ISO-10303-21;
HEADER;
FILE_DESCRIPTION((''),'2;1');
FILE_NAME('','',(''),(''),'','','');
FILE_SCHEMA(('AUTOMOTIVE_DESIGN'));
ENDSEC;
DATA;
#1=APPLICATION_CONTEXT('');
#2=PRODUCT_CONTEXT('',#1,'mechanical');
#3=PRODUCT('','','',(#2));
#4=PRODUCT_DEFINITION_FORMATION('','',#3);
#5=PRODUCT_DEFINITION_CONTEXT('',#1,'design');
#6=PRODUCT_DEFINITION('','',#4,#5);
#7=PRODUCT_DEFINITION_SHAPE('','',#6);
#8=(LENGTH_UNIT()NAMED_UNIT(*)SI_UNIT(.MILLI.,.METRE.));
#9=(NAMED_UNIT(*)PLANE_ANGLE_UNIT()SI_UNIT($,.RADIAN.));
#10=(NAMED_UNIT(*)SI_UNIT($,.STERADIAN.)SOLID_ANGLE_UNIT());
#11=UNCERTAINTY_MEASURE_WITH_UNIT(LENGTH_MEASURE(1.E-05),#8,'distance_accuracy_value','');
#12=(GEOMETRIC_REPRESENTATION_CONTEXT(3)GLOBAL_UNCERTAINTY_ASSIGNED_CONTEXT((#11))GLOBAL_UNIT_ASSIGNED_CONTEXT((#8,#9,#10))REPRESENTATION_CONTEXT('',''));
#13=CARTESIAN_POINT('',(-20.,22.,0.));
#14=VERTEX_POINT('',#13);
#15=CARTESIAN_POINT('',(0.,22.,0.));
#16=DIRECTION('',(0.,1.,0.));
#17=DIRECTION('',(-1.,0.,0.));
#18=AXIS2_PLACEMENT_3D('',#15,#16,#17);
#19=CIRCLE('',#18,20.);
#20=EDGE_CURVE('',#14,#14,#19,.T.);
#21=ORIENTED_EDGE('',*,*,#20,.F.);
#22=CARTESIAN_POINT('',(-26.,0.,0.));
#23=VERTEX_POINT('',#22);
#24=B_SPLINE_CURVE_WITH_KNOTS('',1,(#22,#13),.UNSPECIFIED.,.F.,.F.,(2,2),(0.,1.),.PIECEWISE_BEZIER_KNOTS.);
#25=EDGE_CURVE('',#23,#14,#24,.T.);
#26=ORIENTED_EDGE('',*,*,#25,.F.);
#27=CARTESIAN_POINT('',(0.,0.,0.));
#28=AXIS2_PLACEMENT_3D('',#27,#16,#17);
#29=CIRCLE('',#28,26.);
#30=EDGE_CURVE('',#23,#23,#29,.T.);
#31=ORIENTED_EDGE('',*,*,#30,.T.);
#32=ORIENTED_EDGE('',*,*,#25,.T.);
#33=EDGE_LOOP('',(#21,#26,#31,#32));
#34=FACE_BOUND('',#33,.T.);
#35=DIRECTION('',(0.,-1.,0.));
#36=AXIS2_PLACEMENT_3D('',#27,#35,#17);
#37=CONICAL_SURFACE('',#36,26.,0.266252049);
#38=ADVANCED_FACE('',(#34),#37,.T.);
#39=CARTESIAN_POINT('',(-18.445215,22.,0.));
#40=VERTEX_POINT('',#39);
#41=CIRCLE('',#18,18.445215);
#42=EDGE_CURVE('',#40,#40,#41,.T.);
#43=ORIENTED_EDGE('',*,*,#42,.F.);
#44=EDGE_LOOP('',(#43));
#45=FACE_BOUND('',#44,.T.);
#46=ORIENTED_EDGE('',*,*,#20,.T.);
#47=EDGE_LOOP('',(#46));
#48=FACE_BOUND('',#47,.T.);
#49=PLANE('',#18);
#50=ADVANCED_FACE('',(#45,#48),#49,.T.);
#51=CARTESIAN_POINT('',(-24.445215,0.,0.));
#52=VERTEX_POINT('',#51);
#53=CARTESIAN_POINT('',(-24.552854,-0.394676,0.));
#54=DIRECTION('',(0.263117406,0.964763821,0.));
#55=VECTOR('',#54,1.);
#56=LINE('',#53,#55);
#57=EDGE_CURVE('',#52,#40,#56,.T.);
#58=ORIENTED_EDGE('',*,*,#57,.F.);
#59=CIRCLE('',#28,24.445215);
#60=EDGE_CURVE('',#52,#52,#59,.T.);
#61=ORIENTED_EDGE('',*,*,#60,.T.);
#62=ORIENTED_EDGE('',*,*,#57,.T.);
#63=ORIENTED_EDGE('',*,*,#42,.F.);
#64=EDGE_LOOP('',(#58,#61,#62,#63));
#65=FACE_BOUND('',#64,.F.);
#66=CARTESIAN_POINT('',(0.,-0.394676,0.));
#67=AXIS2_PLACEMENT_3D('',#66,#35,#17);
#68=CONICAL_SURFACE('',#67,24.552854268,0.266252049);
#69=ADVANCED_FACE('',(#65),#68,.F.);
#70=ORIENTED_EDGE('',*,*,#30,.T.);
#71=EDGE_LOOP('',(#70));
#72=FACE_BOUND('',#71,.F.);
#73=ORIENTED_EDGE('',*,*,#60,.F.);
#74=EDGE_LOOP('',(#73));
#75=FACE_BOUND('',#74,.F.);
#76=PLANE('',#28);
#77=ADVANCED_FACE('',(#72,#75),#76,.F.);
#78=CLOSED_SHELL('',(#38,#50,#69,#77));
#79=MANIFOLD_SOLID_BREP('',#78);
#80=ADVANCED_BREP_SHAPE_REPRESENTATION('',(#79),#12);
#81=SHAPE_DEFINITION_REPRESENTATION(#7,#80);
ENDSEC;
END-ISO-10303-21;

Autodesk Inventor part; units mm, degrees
ref_plane "YZ Plane" through (0, 0, 0) normal (1, 0, 0) x (0, 1, 0)
ref_plane "XY Plane" through (0, 0, 0) normal (0, 0, 1) x (1, 0, 0)
sketch "Szkic6" plane through (0, 0, 0) normal (0, 1, 0) x (-1, 0, 0)
  circle A0 centre (0, 0) radius 26
  dimension "d33" = 52
ref_plane "Płaszczyzna konstrukcyjna1" through (0, 22, 0) normal (0, 1, 0) x (-1, 0, 0)
sketch "Szkic7" plane through (0, 22, 0) normal (0, 1, 0) x (-1, 0, 0)
  circle A0 centre (0, 0) radius 20
  dimension "d35" = 40
loft "Wyciągnięcie złożone1" add profiles "Szkic6", "Szkic7"
shell "Skorupa1" thickness 1.5 removed faces 2 at (2.364, 22, 6.2334) at (2.9724, 0, 4.9305)
equation "\"d33\" = OD1"
equation "\"d35\" = OD2"
equation "\"d52\" = THK"
equation "\"SzerokośćGięciaPodcięcia\" = Grubość"
equation "\"RozmiarPodcięciaNarożnika\" = 4 * Grubość"
equation "\"PromieńPrzejścia\" = PromieńGięcia"
equation "\"Rozmiar_promienia_Jacobiego\" = PromieńGięcia"
equation "\"Wielk_odstępu\" = Grubość"
equation "\"d2\" = PromieńGięcia"
equation "\"d23\" = PromieńGięcia"
equation "\"OD1\" = 52"
equation "\"OD2\" = 40"
equation "\"L\" = 22"
equation "\"THK\" = 1.5"
equation "\"d34\" = L"
equation "\"Grubość\" = 1.5"
equation "\"PromieńGięcia\" = 3"
properties part number "Redukcja symetryczna Ø52x40x1,5 L=22" material "304"
